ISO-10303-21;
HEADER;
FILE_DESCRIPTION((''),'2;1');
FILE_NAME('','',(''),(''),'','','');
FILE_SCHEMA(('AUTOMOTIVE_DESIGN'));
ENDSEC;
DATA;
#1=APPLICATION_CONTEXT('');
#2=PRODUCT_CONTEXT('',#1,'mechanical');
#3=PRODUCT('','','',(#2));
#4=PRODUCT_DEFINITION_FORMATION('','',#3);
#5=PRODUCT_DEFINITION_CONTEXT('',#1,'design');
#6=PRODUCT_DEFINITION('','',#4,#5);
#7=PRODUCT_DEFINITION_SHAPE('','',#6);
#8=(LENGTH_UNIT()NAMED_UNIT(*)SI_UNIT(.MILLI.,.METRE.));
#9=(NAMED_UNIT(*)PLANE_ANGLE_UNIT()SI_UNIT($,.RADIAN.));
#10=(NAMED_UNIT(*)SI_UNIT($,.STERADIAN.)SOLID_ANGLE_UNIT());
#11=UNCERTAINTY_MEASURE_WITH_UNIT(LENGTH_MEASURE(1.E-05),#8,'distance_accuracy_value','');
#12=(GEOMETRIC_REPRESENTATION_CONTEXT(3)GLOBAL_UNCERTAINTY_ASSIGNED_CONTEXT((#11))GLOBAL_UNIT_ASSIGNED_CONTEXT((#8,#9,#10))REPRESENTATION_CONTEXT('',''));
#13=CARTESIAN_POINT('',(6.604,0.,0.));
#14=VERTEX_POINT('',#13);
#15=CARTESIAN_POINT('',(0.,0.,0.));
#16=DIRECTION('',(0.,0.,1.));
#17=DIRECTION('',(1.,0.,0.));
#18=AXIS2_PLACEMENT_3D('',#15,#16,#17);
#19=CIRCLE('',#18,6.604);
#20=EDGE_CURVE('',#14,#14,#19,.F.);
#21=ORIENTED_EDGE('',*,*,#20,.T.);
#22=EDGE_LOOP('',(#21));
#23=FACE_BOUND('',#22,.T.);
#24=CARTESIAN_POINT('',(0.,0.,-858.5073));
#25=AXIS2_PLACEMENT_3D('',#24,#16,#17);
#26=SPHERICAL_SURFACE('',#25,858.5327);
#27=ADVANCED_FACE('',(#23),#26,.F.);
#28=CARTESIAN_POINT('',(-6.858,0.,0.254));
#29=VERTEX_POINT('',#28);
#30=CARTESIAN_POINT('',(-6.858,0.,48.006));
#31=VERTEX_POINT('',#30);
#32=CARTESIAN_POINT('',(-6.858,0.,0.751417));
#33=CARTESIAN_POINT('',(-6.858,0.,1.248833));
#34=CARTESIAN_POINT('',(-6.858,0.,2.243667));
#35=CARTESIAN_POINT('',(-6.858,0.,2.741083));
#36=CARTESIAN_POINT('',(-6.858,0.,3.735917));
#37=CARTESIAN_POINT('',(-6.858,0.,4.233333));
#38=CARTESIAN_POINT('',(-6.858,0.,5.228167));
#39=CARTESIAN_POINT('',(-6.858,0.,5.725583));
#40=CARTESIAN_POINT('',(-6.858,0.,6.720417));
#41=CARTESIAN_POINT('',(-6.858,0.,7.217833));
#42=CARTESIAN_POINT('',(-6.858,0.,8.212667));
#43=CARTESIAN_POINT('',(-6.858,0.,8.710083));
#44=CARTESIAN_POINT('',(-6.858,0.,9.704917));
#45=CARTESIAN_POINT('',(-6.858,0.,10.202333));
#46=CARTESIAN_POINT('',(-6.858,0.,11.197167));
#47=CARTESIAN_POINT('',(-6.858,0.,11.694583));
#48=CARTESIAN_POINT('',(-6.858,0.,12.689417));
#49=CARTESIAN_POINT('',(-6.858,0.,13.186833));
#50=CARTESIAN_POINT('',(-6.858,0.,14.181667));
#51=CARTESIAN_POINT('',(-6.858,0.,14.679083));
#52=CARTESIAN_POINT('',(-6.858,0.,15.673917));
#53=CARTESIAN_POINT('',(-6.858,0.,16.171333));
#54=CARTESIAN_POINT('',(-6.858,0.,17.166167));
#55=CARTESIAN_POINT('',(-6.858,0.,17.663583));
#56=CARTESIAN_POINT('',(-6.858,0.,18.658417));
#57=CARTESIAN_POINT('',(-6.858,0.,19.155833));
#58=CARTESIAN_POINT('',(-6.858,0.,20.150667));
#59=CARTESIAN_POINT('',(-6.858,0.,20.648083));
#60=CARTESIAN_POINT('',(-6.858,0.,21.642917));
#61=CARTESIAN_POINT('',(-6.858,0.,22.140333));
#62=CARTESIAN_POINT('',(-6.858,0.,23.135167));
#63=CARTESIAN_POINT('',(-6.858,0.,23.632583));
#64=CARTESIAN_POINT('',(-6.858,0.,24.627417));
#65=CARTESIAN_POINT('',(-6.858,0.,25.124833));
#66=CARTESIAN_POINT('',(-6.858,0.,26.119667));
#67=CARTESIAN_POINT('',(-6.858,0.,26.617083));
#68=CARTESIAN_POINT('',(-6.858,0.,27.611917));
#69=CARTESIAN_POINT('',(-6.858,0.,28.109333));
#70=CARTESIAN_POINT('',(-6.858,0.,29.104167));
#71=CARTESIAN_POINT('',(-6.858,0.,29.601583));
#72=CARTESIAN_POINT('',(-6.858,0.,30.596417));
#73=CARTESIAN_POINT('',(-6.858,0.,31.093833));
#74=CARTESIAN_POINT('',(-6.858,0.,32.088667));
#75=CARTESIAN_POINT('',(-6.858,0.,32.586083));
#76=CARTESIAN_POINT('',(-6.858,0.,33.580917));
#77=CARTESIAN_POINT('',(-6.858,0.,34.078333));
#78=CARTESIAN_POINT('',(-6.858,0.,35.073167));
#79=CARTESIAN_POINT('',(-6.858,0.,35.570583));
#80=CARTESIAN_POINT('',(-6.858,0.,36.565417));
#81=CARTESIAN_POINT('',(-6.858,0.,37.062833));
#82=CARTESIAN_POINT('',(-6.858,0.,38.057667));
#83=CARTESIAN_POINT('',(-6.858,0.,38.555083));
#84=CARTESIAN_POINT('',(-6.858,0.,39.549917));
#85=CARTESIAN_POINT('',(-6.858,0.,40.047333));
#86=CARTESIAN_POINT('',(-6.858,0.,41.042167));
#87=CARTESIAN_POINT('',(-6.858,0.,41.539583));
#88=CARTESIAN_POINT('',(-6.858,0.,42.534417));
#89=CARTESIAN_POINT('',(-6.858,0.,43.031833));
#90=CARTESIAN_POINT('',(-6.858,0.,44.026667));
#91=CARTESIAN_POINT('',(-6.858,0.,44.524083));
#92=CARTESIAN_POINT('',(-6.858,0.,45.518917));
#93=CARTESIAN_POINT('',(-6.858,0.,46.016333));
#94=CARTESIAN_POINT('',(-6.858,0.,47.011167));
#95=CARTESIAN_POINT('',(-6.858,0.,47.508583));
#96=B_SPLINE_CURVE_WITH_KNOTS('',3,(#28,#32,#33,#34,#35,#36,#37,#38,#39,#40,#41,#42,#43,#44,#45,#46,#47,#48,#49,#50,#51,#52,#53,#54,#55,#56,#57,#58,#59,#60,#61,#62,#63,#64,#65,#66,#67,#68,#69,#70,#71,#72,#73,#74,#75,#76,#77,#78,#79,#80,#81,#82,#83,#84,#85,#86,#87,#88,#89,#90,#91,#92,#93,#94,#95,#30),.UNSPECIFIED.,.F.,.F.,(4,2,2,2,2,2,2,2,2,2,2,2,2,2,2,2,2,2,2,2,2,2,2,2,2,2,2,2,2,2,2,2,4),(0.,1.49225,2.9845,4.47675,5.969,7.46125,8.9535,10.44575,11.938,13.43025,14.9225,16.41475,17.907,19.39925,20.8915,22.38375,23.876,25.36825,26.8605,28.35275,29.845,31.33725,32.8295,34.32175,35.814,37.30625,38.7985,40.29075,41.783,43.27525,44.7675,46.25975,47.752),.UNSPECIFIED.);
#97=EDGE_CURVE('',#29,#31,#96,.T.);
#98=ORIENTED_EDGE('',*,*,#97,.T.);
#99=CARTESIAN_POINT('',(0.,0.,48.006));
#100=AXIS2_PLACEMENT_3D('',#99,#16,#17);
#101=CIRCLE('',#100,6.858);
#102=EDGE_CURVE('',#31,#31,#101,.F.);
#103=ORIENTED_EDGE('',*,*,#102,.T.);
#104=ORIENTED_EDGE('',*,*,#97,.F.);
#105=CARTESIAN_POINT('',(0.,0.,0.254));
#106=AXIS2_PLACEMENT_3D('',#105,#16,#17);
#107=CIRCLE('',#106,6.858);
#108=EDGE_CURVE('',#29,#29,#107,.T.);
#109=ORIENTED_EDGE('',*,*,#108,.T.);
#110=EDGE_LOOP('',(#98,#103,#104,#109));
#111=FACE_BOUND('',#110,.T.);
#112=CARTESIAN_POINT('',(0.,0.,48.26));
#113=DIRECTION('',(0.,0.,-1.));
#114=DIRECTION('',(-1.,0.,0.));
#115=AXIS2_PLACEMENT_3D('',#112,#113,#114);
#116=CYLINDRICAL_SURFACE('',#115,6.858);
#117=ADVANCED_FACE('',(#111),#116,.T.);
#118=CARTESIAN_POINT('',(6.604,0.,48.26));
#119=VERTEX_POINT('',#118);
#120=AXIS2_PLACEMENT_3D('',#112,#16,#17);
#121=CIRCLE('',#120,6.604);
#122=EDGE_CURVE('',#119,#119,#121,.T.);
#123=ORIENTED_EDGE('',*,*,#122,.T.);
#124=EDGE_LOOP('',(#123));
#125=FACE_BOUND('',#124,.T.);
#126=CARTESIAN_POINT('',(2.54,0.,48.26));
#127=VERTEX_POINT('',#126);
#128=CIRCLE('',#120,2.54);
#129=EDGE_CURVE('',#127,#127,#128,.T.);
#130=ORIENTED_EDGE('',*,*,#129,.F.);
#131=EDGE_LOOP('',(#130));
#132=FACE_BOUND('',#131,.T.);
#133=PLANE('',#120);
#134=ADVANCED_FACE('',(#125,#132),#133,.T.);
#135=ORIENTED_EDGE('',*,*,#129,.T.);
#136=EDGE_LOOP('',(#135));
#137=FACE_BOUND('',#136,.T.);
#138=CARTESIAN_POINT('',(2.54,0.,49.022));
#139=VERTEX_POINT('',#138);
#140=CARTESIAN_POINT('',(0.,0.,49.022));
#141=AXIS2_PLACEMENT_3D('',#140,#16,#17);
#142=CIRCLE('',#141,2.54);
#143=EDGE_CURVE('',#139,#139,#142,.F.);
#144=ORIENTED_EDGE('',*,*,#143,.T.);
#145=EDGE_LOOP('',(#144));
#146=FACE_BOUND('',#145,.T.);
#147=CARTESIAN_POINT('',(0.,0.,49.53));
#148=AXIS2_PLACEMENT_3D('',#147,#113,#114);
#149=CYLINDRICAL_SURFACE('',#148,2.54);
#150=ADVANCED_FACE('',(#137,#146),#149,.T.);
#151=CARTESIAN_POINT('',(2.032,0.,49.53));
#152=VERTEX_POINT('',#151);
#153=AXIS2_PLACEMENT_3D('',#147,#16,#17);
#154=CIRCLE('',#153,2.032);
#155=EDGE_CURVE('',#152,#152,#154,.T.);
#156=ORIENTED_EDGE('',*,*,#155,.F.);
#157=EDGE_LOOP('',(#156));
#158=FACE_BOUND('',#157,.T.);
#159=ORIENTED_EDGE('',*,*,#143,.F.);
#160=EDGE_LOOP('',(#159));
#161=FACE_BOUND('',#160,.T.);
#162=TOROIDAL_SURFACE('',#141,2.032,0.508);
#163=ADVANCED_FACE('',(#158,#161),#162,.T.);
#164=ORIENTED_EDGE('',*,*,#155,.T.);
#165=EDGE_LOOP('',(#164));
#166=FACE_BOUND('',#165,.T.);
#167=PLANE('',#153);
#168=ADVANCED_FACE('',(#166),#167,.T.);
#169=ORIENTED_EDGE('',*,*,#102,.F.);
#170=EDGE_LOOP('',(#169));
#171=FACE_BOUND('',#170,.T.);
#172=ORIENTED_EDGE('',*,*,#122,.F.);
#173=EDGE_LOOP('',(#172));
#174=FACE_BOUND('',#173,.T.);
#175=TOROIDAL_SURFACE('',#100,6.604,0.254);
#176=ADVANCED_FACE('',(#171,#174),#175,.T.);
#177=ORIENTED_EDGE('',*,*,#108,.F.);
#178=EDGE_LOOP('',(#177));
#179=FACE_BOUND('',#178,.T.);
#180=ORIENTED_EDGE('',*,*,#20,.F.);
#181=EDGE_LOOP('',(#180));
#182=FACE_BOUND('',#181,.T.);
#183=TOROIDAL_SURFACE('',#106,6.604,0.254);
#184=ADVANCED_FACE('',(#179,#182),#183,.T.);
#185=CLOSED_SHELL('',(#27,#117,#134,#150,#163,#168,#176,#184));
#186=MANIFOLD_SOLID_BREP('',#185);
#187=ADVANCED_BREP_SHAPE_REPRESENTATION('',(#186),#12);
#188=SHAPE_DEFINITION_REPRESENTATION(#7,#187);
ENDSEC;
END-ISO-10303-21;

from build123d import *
from OCP.BRepAlgoAPI import BRepAlgoAPI_Cut
from OCP.TopTools import TopTools_ListOfShape

# Parameters (mm, degrees)
SKETCH1_R           = 6.858
BOSS_EXTRUDE1_DEPTH = 48.26
FILLET1_R           = 0.254
SKETCH2_R           = 2.54
BOSS_EXTRUDE2_DEPTH = 1.27
FILLET2_R           = 0.508


with BuildPart() as part:
    # Sketch1 → Boss-Extrude1 (new body)
    with BuildSketch(Plane.XY):
        with Locations(Location((0, 0, 0), (0, 0, 180))):
            Circle(SKETCH1_R)
    extrude(amount=BOSS_EXTRUDE1_DEPTH)

    # Fillet1
    fillet1_edges = [part.edges().sort_by_distance(p)[0] for p in [
        (6.858, 0, 0),
        (6.858, 0, 48.26),
    ]]
    fillet(fillet1_edges, radius=FILLET1_R)

    # Sketch2 → Boss-Extrude2 (add)
    with BuildSketch(Plane.XY.offset(48.26)):
        Circle(SKETCH2_R)
    extrude(amount=BOSS_EXTRUDE2_DEPTH)

    # Fillet2
    fillet2_edges = [part.edges().sort_by_distance(p)[0] for p in [
        (-2.54, 0, 49.53),
    ]]
    fillet(fillet2_edges, radius=FILLET2_R)


with BuildPart() as dome1_tool:
    # Dome1: read off the stored shape, not the designer's step
    # Dome1 outline → Dome1 (revolve)
    with BuildSketch(Plane.XZ):
        with BuildLine():
            Line((0, 0), (6.604000859, -7e-09))
            ThreePointArc((6.604000859, -7e-09), (3.302024852, 0.019049975), (0, 0.0254))
            Line((0, 0.0254), (0, 0))
        make_face()
    revolve(axis=Axis((0, 0, 0), (0, 0, 1)))


with BuildPart() as part_1:
    add(part.part)

    # Dome1: cut by dome1_tool, with a tolerance
    dome1_stock = TopTools_ListOfShape()
    dome1_stock.Append(part_1.part.wrapped)
    dome1_tools = TopTools_ListOfShape()
    dome1_tools.Append(dome1_tool.part.wrapped)
    dome1_cut = BRepAlgoAPI_Cut()
    dome1_cut.SetArguments(dome1_stock)
    dome1_cut.SetTools(dome1_tools)
    dome1_cut.SetFuzzyValue(0.00001)
    dome1_cut.Build()
    add(Compound.cast(dome1_cut.Shape()).solids(), mode=Mode.REPLACE)


solid = part_1.part
